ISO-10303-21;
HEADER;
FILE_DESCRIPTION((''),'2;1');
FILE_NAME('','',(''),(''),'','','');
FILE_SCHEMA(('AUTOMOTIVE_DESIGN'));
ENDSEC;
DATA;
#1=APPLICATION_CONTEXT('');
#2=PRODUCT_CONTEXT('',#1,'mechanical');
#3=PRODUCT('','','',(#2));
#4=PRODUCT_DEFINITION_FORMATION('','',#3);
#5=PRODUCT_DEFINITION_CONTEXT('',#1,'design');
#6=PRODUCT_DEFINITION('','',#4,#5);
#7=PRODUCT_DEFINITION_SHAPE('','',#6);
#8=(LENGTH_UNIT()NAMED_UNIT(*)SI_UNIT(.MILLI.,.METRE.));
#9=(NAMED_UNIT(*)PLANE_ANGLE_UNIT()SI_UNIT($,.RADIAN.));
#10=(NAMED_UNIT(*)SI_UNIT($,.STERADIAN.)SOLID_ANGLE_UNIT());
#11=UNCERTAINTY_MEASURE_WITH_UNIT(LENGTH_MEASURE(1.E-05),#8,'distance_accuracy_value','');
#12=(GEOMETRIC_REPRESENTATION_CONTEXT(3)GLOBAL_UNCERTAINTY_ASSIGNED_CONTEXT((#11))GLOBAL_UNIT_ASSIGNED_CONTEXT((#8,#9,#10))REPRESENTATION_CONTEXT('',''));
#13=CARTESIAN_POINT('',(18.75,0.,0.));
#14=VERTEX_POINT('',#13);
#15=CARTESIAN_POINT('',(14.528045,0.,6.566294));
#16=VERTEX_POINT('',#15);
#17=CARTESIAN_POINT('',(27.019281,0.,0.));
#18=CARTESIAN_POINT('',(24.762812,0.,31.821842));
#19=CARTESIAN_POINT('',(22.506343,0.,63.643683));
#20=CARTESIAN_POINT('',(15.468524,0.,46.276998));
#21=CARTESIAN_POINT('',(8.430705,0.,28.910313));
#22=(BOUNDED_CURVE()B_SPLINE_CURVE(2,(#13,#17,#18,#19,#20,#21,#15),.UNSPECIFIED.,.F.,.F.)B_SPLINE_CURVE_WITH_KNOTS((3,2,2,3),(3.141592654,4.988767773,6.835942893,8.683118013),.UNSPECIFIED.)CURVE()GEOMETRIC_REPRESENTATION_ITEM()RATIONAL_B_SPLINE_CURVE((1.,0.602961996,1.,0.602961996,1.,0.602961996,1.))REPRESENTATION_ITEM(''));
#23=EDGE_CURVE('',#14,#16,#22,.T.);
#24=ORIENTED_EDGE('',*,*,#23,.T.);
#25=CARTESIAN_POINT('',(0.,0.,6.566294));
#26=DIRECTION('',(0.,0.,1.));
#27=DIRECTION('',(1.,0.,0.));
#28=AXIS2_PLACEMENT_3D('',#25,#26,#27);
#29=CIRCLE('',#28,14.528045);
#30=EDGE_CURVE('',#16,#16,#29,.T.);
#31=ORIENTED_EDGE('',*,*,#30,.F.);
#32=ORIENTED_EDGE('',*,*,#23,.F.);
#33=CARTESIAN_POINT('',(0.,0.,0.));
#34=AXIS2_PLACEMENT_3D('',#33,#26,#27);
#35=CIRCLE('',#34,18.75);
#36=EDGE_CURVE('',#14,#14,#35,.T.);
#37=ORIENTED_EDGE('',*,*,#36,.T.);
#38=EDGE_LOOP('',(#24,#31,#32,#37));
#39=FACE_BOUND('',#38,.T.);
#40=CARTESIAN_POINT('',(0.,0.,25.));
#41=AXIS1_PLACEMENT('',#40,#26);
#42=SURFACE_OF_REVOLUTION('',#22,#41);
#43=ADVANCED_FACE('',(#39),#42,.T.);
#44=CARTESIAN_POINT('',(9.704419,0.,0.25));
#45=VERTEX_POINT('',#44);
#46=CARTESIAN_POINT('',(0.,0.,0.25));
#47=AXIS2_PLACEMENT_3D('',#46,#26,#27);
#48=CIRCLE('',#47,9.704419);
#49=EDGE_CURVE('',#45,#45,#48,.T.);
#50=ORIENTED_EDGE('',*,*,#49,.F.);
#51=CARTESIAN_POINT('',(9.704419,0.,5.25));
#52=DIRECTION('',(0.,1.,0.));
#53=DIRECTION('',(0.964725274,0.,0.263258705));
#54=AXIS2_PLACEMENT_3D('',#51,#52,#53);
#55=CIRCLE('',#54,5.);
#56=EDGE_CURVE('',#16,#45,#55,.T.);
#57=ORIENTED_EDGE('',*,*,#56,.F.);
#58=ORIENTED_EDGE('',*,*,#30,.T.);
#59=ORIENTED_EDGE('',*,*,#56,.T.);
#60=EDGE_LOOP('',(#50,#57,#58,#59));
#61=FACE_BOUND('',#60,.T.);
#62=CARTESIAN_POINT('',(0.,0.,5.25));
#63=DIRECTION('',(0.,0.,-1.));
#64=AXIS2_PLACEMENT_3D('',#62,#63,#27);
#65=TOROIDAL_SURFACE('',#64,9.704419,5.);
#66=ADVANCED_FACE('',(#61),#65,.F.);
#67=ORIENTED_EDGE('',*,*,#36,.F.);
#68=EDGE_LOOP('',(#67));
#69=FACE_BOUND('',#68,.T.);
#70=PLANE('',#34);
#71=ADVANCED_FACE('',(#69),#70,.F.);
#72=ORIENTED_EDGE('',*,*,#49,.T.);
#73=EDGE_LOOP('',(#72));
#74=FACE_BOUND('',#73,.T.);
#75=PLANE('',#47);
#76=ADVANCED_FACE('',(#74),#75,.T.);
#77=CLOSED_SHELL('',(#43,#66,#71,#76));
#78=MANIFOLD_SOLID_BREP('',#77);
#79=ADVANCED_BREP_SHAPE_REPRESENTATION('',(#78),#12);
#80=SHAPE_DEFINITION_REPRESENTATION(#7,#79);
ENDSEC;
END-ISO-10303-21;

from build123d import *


# Not quite as in the source:
# - a feature names something its author has since deleted; it is built from what else it names


with BuildPart() as f1:
    # F0 (on Front) → F1 (revolve)
    with BuildSketch(Plane.XZ):
        with BuildLine():
            Line((0, 0), (18.75, 0))
            add(Edge.make_bspline(
                [(18.75, 0), (27.0192806225, 0), (24.7628117245, 31.8218415874), (22.5063428266, 63.6436831748), (15.4685240736, 46.2769981885), (8.4307053206, 28.9103132022), (14.5280449909, 6.5662935248)],
                knots=[3.1415926536, 3.1415926536, 3.1415926536, 4.9887677733, 4.9887677733, 6.8359428931, 6.8359428931, 8.6831180128, 8.6831180128, 8.6831180128], degree=2, weights=[1, 0.6029619957, 1, 0.6029619957, 1, 0.6029619957, 1]))
            ThreePointArc((14.5280449909, 6.5662935248), (13.6781742516, 2.215322721), (9.7044186209, 0.25))
            Line((9.7044186209, 0.25), (0, 0.25))
            Line((0, 0.25), (0, 0))
        make_face()
    revolve(axis=Axis((0, 0, 25), (0, 0, 1)))


solid = f1.part
